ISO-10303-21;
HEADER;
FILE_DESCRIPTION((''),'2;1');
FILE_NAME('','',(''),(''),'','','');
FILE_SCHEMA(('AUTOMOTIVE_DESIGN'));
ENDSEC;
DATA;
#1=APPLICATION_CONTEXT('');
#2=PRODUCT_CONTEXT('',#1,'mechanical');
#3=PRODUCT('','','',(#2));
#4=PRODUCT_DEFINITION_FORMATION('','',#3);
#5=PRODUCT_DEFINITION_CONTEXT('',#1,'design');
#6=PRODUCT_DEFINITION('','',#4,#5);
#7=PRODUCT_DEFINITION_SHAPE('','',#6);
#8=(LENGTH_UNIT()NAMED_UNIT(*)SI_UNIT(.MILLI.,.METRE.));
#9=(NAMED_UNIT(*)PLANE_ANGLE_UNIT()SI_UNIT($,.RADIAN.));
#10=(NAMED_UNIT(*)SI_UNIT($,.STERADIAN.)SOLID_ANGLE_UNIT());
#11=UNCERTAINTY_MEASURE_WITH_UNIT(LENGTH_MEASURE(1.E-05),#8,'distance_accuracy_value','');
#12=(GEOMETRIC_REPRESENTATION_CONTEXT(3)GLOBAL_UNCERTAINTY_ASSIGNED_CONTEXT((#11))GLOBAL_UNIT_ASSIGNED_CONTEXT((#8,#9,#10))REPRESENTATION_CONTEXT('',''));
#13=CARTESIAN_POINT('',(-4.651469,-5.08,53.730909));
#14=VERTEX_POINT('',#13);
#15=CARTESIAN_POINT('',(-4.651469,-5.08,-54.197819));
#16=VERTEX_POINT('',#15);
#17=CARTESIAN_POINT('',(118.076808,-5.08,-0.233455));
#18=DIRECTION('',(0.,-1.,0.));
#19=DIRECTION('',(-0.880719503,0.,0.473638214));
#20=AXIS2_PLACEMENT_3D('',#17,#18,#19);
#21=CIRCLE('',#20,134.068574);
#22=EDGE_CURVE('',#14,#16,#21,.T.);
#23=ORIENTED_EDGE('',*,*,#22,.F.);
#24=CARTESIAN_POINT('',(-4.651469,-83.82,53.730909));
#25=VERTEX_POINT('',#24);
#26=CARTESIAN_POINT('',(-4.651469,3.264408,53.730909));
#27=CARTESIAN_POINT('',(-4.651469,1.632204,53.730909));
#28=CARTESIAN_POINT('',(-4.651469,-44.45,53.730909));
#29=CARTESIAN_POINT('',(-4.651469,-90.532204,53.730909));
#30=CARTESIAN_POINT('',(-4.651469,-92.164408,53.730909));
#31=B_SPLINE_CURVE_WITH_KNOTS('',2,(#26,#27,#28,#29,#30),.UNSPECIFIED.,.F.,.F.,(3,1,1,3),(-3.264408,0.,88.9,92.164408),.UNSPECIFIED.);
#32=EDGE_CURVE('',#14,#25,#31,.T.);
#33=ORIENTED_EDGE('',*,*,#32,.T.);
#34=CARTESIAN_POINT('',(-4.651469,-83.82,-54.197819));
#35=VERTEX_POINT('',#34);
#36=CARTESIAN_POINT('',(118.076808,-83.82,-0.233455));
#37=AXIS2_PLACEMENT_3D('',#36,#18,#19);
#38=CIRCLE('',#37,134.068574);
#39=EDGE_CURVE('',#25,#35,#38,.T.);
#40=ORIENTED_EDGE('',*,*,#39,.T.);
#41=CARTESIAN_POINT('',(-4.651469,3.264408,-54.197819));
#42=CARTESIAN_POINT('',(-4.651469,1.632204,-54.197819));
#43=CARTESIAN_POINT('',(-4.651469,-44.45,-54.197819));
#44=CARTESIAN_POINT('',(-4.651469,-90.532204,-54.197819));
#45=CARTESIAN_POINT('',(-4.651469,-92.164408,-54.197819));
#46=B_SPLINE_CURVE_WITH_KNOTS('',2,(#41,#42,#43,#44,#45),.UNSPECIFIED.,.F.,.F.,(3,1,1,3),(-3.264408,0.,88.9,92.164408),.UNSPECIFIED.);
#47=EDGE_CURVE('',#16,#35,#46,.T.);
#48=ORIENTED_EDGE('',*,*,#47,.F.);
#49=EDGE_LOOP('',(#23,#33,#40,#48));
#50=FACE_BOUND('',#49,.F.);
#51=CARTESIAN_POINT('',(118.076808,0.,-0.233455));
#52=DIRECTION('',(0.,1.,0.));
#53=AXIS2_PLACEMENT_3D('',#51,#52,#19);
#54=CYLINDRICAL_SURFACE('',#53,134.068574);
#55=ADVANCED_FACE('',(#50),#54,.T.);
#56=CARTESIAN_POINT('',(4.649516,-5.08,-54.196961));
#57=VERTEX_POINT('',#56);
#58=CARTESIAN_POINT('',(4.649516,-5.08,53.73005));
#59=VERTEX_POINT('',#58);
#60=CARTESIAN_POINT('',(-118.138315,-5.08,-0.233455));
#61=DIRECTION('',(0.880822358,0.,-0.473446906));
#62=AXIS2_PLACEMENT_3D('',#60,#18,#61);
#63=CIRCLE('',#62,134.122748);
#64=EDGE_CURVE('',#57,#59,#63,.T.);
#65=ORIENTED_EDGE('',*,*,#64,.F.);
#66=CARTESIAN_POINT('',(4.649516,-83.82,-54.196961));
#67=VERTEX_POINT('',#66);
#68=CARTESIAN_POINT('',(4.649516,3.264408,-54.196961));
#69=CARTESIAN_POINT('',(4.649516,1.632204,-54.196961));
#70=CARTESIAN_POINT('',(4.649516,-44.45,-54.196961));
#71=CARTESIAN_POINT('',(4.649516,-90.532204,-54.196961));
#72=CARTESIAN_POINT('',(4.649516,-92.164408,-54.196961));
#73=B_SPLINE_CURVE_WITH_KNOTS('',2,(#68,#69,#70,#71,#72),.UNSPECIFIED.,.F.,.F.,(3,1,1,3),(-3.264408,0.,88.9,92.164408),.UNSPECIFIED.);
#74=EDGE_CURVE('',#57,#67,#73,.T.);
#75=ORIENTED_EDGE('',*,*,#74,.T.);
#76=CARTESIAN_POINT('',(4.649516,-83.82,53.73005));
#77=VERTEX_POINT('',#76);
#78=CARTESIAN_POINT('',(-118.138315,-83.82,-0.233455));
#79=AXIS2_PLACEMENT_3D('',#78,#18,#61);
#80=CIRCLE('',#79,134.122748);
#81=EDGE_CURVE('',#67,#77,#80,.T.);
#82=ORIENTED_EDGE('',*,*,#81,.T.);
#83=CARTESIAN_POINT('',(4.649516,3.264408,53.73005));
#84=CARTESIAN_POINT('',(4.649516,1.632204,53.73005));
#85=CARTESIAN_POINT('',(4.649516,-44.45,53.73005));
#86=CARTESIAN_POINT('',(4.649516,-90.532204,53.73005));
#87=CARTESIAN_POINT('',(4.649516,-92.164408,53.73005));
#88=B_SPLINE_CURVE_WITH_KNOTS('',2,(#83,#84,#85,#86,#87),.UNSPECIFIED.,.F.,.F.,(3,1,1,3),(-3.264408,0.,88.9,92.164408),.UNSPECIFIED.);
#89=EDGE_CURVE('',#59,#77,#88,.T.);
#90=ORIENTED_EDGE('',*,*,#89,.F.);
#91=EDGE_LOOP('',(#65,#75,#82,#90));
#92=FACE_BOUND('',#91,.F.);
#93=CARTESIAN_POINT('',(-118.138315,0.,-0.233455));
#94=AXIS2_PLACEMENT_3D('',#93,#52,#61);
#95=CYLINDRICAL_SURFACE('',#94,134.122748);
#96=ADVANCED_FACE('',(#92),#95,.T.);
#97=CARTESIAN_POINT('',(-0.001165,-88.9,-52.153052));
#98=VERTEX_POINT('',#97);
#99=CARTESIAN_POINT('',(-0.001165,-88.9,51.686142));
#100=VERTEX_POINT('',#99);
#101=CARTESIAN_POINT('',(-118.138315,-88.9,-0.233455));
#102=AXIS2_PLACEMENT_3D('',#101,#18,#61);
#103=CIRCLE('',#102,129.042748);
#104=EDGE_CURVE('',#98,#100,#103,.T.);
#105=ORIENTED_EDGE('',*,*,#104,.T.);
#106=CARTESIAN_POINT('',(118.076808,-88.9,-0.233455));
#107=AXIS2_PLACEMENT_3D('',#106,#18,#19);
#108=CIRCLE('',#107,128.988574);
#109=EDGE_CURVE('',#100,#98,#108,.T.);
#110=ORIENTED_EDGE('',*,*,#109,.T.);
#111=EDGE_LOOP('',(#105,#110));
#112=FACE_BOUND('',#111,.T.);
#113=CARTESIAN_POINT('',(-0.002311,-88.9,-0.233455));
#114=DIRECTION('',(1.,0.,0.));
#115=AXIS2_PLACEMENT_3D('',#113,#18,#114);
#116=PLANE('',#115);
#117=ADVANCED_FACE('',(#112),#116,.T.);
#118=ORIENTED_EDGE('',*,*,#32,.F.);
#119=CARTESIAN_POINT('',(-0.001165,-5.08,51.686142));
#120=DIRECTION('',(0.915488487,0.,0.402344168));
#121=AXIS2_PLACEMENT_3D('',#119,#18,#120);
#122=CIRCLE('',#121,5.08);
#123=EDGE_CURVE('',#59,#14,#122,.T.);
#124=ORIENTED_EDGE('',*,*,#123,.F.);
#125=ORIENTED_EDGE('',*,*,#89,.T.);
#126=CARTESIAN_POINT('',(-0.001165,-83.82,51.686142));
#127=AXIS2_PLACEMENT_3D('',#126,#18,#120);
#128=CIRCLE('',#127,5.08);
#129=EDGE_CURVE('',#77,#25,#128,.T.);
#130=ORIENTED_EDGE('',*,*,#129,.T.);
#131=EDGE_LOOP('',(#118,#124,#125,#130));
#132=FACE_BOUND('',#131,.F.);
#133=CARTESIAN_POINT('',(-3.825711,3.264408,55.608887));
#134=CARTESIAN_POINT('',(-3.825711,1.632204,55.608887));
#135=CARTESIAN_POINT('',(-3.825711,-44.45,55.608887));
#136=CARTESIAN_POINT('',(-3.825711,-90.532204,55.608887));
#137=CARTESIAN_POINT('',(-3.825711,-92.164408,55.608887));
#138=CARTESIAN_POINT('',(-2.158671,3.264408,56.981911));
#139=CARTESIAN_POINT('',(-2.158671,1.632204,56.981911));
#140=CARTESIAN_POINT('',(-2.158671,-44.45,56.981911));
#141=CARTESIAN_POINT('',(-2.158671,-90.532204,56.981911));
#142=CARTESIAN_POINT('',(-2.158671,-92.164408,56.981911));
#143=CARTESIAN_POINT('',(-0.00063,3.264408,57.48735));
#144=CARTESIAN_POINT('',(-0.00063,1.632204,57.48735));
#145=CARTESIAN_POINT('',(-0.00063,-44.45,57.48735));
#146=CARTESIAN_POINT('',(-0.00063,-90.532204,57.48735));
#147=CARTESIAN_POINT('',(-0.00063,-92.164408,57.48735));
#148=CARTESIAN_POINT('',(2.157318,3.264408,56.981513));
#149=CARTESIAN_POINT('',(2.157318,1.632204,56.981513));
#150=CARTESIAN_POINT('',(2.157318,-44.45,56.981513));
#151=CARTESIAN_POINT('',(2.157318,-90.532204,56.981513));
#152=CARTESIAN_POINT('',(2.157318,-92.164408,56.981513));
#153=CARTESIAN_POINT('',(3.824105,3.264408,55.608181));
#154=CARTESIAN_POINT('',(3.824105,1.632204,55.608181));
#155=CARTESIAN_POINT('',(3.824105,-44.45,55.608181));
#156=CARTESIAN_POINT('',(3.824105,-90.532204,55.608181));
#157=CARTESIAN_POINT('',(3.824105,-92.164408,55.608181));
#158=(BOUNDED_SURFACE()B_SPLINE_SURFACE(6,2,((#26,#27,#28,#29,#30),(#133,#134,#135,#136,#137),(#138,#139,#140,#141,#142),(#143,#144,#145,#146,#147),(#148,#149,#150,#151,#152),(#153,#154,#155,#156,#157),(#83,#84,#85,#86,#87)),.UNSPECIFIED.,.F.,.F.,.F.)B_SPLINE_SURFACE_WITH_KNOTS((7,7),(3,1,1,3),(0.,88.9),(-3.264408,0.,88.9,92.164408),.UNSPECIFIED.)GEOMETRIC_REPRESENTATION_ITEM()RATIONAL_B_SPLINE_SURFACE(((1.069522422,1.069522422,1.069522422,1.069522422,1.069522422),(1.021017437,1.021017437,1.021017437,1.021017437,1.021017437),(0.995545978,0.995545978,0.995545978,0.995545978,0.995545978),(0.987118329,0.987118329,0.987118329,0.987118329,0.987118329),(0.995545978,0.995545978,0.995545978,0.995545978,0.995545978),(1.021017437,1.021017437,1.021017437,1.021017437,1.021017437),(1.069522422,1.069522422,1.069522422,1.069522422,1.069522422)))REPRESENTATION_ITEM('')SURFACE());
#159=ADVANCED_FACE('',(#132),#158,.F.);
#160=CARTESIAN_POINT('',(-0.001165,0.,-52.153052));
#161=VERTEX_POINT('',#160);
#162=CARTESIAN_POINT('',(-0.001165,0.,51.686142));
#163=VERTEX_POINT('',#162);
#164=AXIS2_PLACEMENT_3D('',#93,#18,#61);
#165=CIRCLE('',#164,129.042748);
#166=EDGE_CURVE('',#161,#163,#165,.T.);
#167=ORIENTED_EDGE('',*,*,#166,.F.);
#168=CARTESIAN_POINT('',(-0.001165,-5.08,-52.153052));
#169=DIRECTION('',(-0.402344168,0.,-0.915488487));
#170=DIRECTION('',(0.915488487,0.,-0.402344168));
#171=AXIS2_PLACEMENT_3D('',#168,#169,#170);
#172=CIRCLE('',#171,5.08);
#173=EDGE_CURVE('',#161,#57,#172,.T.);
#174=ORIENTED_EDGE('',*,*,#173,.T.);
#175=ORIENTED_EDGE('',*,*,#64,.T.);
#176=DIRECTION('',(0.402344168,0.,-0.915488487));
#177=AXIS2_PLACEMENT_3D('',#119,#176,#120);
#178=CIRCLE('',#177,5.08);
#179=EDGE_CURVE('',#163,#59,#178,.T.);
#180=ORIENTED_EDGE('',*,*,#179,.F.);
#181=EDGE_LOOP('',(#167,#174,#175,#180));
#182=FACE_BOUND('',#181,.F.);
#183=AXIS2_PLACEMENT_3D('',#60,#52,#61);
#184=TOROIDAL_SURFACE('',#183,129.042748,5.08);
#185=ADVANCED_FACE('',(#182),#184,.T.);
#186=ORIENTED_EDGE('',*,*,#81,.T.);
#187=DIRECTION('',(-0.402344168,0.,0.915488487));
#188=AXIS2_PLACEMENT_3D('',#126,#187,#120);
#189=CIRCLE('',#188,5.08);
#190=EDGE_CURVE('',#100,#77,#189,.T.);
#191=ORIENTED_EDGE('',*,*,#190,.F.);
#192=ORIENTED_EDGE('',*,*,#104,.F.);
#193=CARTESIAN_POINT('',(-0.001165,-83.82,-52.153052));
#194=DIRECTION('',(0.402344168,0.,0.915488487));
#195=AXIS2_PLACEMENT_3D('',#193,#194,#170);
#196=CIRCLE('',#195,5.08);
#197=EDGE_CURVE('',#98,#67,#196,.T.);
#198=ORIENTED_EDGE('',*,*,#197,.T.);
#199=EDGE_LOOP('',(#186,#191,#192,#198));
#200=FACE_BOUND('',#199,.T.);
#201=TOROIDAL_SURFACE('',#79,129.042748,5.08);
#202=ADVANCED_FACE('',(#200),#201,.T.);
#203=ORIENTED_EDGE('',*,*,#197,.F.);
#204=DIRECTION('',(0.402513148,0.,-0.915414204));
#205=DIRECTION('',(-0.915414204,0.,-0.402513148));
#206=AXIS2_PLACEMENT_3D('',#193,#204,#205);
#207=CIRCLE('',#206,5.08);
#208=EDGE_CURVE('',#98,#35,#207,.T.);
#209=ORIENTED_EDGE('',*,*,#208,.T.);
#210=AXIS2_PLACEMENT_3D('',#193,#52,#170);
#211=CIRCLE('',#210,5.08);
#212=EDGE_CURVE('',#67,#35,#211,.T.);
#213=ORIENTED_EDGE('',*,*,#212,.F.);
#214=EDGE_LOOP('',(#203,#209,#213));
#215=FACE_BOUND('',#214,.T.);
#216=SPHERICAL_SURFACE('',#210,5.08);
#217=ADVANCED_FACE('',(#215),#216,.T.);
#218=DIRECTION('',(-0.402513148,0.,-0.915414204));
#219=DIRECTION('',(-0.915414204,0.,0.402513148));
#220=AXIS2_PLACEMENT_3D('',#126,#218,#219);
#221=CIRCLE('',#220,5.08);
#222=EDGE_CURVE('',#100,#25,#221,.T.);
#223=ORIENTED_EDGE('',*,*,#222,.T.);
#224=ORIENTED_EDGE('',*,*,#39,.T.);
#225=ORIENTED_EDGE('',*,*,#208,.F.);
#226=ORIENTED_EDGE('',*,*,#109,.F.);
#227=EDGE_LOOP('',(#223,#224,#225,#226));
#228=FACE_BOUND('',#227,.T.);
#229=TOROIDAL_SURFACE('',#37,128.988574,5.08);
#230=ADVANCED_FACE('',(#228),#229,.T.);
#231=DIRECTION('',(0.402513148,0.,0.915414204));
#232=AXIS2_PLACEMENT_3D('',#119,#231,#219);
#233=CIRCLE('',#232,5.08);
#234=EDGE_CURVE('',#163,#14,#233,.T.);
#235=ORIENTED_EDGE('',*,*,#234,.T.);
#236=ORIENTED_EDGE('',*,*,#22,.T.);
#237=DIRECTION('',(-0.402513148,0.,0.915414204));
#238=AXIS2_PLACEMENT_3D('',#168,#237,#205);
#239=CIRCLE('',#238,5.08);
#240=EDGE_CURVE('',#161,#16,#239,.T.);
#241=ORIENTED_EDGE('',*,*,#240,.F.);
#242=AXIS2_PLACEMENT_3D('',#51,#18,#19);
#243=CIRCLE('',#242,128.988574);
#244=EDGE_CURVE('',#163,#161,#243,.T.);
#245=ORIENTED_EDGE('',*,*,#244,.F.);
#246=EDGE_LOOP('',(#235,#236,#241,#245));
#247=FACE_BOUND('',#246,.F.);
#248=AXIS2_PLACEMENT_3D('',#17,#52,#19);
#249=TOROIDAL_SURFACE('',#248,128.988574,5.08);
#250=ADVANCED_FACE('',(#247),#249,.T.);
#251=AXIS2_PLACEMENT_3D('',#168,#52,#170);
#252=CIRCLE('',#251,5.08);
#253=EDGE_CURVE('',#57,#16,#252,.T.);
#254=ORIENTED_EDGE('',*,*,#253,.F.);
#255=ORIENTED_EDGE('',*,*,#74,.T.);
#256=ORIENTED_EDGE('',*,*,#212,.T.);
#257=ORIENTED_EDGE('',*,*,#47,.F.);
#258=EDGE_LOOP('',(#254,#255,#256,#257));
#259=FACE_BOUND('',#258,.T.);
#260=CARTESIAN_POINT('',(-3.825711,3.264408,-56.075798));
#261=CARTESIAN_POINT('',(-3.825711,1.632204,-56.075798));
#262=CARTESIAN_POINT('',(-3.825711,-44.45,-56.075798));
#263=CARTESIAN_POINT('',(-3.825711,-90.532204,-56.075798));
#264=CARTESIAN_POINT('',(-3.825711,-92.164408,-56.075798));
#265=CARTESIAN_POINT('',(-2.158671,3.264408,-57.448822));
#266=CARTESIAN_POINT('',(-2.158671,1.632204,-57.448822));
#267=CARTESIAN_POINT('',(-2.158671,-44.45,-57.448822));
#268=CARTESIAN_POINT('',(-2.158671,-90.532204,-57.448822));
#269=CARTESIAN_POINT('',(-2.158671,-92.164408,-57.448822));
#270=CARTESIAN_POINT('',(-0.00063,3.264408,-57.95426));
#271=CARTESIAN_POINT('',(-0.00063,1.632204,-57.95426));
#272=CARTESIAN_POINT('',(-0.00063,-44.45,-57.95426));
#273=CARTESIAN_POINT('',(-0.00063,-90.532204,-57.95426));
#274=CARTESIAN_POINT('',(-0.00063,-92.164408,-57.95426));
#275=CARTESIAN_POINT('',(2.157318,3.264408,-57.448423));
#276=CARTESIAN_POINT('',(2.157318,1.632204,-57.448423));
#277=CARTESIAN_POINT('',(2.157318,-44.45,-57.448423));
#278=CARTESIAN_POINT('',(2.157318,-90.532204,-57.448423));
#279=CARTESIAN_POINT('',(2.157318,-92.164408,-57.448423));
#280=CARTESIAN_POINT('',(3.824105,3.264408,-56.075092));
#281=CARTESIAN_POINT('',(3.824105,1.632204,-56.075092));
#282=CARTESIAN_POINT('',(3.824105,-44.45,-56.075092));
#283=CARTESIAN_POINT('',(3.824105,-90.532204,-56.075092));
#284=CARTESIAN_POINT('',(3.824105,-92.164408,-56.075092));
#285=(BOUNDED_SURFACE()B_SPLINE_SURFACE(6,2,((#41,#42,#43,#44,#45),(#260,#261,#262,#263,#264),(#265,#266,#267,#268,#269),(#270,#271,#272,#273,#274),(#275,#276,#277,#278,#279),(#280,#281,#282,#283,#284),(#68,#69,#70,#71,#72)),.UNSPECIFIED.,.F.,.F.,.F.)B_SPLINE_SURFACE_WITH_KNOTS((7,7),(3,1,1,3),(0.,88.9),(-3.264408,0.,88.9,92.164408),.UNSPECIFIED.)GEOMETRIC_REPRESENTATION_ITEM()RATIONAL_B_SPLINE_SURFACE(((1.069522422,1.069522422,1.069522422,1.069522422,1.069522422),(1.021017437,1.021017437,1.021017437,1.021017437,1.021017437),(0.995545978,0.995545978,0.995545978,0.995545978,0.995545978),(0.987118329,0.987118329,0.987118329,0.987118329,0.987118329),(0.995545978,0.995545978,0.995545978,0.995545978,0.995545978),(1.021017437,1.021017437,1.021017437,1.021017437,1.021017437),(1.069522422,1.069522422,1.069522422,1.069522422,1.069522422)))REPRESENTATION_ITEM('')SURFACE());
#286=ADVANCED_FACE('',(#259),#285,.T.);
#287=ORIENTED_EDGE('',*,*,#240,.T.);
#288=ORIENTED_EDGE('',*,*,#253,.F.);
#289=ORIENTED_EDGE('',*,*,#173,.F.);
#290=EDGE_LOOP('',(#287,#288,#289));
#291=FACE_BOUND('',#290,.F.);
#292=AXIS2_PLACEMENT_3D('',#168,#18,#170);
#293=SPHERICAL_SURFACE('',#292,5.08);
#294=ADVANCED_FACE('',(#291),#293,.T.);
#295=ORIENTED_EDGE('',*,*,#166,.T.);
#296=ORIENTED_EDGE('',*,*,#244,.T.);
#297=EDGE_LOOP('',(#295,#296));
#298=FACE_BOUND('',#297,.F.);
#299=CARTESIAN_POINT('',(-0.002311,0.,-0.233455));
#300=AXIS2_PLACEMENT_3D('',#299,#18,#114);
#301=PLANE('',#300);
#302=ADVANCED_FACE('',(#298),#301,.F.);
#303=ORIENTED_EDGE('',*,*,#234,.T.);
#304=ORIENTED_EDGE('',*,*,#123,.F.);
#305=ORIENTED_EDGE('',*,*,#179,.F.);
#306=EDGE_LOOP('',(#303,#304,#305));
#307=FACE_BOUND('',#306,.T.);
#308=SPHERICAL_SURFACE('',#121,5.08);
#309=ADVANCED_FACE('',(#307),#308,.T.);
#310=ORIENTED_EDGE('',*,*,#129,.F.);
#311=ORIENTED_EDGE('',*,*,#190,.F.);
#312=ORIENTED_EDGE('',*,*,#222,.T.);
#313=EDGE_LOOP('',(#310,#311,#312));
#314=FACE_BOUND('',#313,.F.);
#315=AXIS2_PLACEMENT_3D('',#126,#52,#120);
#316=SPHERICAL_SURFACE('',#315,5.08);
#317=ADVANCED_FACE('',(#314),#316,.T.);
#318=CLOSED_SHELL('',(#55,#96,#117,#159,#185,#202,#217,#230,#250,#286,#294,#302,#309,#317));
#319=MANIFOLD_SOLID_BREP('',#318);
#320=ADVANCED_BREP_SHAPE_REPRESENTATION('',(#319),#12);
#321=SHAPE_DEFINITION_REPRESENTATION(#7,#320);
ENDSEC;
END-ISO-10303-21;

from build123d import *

# Parameters (mm, degrees)
F1_DEPTH = 88.9
F4_R     = 5.08


# Not quite as in the source:
# - a feature of the source that left no trace in its solid (it failed there, or was rolled back) is left out


with BuildPart() as f1:
    # F0 (on Front) → F1 (new body)
    with BuildSketch(Plane.XZ):
        with BuildLine():
            ThreePointArc((0, 63.2665448354), (-15.9917662052, -0.2334551646), (0, -63.7334551646))
            ThreePointArc((0, -63.7334551646), (15.9844327654, -0.2334551646), (0, 63.2665448354))
        make_face()
    extrude(amount=F1_DEPTH)

    # F4
    f4_edges = [f1.edges().sort_by_distance(p)[0] for p in [
        (0, -44.45, -63.733455),
        (0, -44.45, 63.266545),
        (15.984433, 0, -0.233455),
        (15.984433, -88.9, -0.233455),
        (-15.991766, 0, -0.233455),
        (-15.991766, -88.9, -0.233455),
    ]]
    fillet(f4_edges, radius=F4_R)


solid = f1.part
